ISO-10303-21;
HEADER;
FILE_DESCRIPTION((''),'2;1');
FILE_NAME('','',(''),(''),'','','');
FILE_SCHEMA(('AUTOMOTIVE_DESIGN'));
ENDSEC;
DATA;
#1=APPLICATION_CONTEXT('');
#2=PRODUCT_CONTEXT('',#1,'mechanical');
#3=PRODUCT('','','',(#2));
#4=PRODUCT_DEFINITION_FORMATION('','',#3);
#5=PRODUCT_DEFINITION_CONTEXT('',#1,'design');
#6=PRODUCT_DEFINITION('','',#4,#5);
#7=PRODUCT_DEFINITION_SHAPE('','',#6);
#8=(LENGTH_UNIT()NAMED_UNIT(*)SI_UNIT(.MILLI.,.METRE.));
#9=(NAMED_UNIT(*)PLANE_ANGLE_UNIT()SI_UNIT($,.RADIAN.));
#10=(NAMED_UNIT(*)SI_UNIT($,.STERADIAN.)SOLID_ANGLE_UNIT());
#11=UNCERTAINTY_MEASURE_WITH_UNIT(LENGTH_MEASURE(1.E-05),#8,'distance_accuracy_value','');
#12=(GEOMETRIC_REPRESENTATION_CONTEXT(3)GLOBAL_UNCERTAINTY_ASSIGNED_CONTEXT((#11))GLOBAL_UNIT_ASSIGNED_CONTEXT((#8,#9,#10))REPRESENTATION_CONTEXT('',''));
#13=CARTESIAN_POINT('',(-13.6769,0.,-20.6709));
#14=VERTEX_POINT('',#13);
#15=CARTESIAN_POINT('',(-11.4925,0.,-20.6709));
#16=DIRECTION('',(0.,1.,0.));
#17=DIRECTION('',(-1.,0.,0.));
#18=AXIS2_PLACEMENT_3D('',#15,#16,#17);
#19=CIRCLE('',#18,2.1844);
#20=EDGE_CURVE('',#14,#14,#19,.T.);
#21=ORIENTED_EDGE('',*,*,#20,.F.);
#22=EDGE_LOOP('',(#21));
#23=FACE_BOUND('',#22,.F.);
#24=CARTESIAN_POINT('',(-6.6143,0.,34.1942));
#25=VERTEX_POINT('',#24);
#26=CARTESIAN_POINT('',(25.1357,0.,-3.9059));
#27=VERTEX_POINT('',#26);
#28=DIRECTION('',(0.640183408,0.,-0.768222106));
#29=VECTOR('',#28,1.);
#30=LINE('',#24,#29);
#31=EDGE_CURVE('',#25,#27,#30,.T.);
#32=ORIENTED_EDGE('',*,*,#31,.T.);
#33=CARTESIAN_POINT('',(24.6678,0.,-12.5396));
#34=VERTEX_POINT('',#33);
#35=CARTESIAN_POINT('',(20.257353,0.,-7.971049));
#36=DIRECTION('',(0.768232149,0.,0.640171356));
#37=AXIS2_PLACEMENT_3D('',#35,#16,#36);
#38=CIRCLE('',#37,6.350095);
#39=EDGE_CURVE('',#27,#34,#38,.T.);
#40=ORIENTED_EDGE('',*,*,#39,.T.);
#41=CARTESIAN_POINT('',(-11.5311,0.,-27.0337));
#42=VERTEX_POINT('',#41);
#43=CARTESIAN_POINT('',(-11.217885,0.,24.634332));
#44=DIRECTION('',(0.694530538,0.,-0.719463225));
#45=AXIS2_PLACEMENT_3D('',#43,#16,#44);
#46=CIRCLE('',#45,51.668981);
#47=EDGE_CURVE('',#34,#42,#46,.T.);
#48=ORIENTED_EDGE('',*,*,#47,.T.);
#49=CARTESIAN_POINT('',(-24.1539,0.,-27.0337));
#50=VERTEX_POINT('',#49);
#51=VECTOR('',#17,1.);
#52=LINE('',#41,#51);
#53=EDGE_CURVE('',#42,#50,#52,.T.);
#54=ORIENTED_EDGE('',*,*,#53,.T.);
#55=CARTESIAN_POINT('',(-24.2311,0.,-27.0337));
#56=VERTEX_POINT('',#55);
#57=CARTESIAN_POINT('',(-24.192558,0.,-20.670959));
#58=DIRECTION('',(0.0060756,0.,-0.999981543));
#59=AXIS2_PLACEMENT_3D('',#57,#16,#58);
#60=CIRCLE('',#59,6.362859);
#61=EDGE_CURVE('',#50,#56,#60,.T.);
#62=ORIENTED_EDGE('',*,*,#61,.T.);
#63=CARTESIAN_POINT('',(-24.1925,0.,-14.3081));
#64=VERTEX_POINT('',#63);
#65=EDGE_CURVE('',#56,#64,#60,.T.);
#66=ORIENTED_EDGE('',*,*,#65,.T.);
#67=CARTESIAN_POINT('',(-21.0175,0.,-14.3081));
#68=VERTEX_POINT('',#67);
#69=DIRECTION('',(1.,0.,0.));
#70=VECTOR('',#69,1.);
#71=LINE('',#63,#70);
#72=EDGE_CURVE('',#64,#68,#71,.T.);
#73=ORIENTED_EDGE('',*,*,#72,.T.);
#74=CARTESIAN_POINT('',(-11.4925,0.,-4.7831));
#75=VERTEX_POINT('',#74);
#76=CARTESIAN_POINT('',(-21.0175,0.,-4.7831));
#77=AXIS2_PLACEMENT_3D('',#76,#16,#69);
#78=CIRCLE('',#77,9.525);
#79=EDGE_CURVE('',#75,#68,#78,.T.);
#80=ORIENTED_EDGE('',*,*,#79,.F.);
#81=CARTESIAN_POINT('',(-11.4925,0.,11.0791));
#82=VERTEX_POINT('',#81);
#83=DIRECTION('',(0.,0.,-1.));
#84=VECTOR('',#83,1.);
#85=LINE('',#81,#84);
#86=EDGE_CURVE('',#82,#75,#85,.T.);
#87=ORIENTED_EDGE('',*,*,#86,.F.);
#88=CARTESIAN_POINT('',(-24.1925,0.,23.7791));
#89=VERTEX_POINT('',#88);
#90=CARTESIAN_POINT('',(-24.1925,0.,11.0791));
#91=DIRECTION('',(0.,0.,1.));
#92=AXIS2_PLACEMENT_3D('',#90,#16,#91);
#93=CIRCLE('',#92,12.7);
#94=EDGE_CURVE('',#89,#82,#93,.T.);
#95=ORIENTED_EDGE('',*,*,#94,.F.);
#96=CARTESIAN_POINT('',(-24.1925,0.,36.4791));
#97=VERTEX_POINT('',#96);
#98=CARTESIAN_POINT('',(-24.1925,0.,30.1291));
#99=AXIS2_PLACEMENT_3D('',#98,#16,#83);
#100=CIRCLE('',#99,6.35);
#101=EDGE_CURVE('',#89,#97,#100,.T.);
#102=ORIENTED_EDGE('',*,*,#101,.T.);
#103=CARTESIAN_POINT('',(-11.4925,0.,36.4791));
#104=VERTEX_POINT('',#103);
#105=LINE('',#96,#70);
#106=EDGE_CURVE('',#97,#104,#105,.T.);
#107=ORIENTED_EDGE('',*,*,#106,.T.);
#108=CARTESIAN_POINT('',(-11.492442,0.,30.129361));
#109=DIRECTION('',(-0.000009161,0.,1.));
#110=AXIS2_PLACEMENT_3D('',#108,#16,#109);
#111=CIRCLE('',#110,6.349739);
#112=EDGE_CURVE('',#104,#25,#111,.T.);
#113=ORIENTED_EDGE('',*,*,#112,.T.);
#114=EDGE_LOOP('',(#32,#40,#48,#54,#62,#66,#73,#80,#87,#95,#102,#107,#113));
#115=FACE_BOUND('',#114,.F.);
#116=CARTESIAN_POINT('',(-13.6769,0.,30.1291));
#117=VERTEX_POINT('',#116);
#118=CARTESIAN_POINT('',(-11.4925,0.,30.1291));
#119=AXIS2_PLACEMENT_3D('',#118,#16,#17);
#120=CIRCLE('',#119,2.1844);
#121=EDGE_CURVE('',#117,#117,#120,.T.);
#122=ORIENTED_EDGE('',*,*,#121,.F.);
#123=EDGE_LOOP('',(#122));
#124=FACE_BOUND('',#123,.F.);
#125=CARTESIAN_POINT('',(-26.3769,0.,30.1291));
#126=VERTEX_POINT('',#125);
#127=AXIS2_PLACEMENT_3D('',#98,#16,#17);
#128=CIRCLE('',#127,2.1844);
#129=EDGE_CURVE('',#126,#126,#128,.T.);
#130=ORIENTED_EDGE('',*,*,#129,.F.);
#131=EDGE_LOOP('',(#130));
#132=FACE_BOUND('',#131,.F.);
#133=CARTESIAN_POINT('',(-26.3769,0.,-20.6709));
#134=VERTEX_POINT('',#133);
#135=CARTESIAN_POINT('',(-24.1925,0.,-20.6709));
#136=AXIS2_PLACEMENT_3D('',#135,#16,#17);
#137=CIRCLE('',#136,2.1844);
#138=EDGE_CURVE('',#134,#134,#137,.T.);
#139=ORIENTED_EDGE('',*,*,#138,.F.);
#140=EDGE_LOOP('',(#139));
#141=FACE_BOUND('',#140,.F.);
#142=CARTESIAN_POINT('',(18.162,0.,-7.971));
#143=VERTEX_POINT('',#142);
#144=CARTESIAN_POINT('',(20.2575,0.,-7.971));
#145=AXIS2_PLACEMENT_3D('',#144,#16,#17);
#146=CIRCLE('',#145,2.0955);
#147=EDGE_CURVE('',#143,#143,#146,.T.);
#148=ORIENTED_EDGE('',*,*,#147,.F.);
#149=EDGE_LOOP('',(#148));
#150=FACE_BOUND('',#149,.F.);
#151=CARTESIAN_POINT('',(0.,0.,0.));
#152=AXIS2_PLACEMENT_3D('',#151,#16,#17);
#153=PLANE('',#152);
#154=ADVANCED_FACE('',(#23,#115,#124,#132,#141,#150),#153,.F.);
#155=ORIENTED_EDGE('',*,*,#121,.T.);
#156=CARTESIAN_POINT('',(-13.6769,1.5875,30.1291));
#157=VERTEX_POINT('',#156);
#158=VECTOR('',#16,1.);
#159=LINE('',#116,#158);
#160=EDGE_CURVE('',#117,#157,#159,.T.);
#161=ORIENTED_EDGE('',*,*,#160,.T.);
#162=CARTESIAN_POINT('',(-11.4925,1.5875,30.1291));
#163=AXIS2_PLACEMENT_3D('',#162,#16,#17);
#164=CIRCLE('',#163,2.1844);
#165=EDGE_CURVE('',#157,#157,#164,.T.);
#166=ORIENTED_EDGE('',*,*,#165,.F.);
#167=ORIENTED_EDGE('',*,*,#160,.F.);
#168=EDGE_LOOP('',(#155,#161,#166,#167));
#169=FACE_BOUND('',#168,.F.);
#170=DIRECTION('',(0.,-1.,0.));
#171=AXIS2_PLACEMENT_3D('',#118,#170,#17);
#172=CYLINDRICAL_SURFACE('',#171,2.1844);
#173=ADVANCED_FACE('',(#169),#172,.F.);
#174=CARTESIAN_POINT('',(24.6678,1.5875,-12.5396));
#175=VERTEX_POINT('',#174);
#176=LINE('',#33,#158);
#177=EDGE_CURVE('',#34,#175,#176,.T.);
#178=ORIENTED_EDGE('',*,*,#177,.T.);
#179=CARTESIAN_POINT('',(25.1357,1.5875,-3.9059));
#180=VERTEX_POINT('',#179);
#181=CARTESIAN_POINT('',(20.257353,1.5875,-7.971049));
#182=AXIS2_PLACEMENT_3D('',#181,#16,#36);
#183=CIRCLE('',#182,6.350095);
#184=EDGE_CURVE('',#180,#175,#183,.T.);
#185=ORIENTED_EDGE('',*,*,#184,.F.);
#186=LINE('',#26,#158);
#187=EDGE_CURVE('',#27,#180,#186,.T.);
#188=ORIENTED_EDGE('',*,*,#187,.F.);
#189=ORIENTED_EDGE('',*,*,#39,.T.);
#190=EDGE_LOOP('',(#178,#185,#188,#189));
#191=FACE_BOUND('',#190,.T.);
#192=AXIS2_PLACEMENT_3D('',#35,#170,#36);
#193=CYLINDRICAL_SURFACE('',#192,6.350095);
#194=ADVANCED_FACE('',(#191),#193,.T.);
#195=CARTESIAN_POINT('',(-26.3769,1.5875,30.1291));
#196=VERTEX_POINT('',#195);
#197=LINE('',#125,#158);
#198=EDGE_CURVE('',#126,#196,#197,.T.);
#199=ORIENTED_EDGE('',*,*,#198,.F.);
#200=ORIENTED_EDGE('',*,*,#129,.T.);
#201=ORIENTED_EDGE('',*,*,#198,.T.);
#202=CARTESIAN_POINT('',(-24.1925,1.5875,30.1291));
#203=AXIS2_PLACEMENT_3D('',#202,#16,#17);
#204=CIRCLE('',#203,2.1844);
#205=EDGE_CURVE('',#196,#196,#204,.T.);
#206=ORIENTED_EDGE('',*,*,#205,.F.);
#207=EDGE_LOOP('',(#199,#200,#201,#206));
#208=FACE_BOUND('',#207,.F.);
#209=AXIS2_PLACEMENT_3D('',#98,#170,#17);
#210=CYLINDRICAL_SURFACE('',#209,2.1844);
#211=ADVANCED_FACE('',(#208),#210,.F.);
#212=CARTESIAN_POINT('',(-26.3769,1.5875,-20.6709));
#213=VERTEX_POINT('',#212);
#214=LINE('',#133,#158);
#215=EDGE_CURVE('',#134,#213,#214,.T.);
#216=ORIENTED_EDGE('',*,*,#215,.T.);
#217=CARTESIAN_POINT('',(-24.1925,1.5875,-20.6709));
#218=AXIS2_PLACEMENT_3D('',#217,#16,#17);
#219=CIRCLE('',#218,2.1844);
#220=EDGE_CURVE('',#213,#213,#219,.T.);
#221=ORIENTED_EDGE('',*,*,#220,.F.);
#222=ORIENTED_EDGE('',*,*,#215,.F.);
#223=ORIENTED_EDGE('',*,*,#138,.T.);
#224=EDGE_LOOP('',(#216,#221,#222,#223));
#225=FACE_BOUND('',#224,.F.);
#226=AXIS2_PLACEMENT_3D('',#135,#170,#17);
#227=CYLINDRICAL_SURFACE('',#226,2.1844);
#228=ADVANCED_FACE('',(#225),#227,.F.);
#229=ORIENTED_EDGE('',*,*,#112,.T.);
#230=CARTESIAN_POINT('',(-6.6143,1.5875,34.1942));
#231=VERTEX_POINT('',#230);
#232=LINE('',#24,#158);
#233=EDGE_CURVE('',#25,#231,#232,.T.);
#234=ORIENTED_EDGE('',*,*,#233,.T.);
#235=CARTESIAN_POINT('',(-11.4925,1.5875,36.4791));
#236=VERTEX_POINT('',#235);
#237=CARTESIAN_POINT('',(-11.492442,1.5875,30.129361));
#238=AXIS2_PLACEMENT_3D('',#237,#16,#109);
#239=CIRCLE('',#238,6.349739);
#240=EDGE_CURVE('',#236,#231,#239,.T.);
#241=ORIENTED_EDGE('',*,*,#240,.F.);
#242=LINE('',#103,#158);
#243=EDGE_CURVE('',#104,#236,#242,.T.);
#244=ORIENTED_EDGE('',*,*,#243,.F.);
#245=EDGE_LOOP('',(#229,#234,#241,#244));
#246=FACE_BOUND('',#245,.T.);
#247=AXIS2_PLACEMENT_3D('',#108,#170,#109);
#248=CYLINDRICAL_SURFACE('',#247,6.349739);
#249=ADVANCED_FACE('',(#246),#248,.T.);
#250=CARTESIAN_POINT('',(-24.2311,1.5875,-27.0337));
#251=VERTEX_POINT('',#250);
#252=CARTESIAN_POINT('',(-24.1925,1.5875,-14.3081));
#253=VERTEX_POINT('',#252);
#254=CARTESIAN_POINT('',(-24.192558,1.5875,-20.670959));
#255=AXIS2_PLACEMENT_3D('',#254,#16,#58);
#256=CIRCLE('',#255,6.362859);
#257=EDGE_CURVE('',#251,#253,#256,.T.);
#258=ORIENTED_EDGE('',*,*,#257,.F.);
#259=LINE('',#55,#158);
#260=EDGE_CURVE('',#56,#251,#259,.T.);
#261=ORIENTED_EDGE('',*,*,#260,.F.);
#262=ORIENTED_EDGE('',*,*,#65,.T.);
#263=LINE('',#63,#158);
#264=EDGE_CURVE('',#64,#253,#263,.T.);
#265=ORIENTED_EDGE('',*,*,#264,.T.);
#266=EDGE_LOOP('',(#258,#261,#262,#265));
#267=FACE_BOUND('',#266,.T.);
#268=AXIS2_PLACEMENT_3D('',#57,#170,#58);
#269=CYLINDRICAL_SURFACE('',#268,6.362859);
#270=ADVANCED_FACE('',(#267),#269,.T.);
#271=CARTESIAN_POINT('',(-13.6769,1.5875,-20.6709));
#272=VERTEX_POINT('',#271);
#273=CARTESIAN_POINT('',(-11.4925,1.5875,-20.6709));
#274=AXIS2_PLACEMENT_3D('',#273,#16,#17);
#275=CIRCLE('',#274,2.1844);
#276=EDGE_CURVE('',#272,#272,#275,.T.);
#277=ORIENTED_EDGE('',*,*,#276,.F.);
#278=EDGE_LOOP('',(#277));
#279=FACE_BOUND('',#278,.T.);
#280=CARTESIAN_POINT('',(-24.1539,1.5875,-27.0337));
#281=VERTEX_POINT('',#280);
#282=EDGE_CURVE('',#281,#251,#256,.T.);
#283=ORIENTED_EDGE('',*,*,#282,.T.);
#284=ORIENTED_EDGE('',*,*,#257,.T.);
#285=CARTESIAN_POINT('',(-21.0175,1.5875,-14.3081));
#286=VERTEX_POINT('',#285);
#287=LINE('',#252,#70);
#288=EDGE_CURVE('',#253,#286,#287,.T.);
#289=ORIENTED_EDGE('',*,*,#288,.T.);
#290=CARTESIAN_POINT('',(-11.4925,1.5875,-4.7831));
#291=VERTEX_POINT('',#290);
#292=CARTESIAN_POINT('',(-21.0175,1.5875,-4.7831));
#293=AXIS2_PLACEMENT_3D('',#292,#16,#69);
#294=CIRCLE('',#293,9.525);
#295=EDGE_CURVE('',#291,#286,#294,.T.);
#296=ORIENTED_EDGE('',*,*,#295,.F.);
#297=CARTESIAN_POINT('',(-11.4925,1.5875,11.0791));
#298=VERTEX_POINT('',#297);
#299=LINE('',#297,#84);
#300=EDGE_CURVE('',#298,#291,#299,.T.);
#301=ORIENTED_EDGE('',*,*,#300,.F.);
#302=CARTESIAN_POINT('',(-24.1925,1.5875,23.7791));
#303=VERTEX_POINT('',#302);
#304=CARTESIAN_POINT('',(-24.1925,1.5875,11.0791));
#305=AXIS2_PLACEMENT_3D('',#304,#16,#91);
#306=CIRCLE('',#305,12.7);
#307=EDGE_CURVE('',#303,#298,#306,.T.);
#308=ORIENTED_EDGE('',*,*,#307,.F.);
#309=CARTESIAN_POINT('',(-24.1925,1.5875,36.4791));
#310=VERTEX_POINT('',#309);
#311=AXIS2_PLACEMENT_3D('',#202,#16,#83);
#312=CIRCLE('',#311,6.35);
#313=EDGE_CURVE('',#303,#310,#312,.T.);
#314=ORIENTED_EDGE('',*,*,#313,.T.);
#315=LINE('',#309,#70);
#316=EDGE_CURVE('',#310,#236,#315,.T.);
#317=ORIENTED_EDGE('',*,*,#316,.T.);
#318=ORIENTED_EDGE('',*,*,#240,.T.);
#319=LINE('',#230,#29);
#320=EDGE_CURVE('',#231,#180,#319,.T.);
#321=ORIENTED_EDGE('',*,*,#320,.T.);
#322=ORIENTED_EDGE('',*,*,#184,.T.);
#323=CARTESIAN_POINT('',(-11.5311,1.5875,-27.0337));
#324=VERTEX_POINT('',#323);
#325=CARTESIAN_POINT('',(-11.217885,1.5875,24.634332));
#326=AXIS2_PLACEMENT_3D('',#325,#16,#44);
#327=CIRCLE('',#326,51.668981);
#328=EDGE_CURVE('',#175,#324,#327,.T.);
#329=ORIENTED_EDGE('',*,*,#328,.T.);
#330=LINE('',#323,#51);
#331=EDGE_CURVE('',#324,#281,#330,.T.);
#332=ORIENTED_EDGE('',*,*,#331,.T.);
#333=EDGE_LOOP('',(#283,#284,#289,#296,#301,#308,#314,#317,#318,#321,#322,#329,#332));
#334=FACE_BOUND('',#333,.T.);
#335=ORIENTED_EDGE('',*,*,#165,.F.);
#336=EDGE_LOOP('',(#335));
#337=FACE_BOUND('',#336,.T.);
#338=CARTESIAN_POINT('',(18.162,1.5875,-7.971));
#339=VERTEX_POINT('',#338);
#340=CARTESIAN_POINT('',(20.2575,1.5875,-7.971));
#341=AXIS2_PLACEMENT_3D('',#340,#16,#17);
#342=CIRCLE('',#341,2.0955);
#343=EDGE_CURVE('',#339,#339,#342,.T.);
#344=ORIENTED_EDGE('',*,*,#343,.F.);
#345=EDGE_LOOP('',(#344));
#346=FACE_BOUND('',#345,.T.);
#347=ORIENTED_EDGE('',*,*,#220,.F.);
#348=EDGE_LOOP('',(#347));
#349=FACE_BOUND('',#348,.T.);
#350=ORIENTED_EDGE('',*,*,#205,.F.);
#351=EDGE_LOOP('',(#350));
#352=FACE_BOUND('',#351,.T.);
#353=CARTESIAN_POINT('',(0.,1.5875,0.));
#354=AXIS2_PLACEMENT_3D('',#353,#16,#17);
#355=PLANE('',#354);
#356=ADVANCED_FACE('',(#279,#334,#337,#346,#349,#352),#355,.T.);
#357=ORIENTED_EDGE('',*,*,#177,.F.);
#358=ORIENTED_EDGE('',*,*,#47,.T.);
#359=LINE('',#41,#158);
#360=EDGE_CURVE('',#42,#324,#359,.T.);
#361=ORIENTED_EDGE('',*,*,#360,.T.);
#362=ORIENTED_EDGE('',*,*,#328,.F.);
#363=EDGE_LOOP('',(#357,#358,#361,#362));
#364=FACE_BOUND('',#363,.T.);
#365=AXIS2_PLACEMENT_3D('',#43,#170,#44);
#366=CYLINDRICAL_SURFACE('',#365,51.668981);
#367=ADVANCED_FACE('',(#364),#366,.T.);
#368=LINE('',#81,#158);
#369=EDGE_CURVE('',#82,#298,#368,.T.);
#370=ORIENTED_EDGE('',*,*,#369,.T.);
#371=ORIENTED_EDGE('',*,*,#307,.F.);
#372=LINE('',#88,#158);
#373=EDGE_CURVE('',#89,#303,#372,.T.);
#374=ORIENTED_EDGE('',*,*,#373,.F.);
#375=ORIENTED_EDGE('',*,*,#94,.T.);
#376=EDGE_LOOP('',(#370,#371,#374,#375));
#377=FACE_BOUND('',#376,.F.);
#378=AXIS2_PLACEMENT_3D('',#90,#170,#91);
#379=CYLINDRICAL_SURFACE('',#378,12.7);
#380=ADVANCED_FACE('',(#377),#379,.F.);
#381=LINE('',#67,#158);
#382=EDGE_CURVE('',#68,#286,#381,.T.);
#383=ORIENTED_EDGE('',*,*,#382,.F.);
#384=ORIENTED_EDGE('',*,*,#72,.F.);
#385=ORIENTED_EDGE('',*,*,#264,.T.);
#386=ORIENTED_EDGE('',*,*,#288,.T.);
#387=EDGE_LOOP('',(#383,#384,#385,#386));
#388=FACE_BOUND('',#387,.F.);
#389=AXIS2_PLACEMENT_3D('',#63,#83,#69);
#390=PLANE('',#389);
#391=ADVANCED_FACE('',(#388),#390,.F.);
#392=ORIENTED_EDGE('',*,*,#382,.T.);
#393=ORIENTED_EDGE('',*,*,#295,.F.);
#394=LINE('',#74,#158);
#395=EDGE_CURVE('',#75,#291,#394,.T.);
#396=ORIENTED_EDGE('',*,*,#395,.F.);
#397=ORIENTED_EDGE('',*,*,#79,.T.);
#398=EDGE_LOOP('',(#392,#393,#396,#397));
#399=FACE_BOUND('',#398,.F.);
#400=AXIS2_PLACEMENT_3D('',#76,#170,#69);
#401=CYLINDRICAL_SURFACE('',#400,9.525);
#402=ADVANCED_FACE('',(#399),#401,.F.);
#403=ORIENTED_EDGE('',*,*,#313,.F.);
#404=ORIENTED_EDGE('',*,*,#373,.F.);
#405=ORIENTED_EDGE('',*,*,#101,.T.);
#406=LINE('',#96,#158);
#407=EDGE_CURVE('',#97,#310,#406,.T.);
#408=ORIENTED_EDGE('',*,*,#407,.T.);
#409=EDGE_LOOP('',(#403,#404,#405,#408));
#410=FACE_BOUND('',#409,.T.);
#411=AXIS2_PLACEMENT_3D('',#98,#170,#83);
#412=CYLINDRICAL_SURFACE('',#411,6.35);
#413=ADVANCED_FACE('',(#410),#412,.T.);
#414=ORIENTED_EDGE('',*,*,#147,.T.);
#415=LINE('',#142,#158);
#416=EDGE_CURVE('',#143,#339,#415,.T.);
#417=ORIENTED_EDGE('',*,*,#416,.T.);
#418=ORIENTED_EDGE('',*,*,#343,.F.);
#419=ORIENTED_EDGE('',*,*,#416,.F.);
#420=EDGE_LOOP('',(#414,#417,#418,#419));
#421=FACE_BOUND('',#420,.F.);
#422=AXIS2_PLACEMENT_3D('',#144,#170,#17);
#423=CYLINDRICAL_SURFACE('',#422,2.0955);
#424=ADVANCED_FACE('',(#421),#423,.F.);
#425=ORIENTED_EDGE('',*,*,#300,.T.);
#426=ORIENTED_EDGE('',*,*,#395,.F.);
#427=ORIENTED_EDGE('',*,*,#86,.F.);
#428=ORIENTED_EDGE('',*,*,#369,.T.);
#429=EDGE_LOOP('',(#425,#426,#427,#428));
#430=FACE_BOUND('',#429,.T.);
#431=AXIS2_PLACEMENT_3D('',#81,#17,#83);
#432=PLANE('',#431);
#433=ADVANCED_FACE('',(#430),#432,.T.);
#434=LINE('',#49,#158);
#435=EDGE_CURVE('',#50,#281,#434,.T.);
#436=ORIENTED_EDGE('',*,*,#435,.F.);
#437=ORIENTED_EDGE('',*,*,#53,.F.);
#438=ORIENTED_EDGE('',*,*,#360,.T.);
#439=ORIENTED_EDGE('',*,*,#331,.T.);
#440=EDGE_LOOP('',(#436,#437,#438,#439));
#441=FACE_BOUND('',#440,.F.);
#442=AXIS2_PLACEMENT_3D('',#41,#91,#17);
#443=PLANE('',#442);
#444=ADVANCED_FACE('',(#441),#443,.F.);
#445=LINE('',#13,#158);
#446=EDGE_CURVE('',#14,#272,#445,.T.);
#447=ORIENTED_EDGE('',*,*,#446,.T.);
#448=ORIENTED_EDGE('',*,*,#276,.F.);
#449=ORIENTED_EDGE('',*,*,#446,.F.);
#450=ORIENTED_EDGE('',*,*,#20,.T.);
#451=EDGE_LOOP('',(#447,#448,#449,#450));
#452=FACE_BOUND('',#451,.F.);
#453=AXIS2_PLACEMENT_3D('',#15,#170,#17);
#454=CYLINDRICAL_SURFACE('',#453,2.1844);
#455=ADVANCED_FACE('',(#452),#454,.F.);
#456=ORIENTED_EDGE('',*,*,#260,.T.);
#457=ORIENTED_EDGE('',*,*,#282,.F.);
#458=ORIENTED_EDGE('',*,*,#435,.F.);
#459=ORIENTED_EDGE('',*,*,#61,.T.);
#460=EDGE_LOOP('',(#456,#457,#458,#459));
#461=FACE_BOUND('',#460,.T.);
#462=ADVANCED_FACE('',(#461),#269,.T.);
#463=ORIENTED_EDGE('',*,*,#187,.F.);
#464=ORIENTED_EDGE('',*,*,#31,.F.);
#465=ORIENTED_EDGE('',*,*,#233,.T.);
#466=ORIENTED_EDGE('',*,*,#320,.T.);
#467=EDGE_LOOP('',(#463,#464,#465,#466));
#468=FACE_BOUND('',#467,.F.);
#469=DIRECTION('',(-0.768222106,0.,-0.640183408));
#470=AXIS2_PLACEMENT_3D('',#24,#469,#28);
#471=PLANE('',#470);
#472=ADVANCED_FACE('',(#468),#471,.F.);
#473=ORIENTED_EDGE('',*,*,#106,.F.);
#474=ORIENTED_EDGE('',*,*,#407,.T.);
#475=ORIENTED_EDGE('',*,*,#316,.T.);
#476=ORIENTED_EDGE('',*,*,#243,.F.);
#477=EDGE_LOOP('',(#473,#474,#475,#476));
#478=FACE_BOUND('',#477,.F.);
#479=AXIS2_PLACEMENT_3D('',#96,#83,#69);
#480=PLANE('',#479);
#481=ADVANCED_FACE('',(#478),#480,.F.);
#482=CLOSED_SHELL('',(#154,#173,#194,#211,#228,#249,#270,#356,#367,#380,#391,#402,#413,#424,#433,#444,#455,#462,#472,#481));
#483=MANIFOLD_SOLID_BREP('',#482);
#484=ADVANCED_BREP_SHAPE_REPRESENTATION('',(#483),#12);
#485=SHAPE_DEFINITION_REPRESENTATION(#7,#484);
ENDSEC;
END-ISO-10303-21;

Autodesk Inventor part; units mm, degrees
ref_plane "YZ Plane" through (0, 0, 0) normal (1, 0, 0) x (0, 1, 0)
ref_plane "XZ Plane" through (0, 0, 0) normal (0, 1, 0) x (-1, 0, 0)
ref_plane "XY Plane" through (0, 0, 0) normal (0, 0, 1) x (1, 0, 0)
sketch "main" plane through (0, 0, 0) normal (0, 0, 1) x (1, 0, 0)
  arc A0 (24.1925, 23.7791) -> (11.4925, 11.0791) centre (24.1925, 11.0791) ccw
  circle A1 centre (11.4925, 30.1291) radius 2.1844
  line L0 (24.1925, 23.7791) -> (24.1925, 23.7791)
  arc A2 (11.4925, 36.4791) -> (6.6143, 34.1942) centre (11.4925, 30.1291) ccw
  circle A3 centre (24.1925, 30.1291) radius 2.1844
  line L1 (24.1925, 36.4791) -> (11.4925, 36.4791)
  arc A4 (24.1925, 23.7791) -> (24.1925, 36.4791) centre (24.1925, 30.1291) ccw
  circle A5 centre (11.4925, -20.6709) radius 2.1844
  circle A6 centre (24.1925, -20.6709) radius 2.1844
  line L2 (24.1925, -14.3081) -> (21.0175, -14.3081)
  arc A7 (24.1539, -27.0337) -> (24.1925, -14.3081) centre (24.1925, -20.6709) ccw
  line L3 (11.4925, 11.0791) -> (11.4925, -4.7831)
  line L4 (6.6143, 34.1942) -> (-25.1357, -3.9059)
  arc A8 (11.4925, -4.7831) -> (21.0175, -14.3081) centre (21.0175, -4.7831) ccw
  circle A9 centre (-20.2575, -7.971) radius 2.0955
  arc A10 (-24.6678, -12.5396) -> (11.5311, -27.0337) centre (11.2178, 24.6342) ccw
  arc A11 (-25.1357, -3.9059) -> (-24.6678, -12.5396) centre (-20.2575, -7.971) ccw
  line L5 (11.5311, -27.0337) -> (24.2311, -27.0337)
  point P0 (10.6662, 5.6616)
  point P1 (11.4925, 23.7791)
  point P2 (11.4925, -14.3081)
  dimension "d0" = 12.7
  dimension "d1" = 12.7
  dimension "d2" = 9.525
sketch "Sketch1" plane through (0, 0, 0) normal (0, 1, 0) x (-1, 0, 0)
  arc A0 (24.1925, 23.7791) -> (11.4925, 11.0791) centre (24.1925, 11.0791) ccw
  circle A1 centre (11.4925, 30.1291) radius 2.1844
  line L0 (24.1925, 23.7791) -> (24.1925, 23.7791)
  arc A2 (11.4925, 36.4791) -> (6.6143, 34.1942) centre (11.4925, 30.1291) ccw
  circle A3 centre (24.1925, 30.1291) radius 2.1844
  line L1 (24.1925, 36.4791) -> (11.4925, 36.4791)
  arc A4 (24.1925, 23.7791) -> (24.1925, 36.4791) centre (24.1925, 30.1291) ccw
  circle A5 centre (11.4925, -20.6709) radius 2.1844
  circle A6 centre (24.1925, -20.6709) radius 2.1844
  line L2 (24.1925, -14.3081) -> (21.0175, -14.3081)
  arc A7 (24.1539, -27.0337) -> (24.1925, -14.3081) centre (24.1925, -20.6709) ccw
  line L3 (11.4925, 11.0791) -> (11.4925, -4.7831)
  line L4 (6.6143, 34.1942) -> (-25.1357, -3.9059)
  arc A8 (11.4925, -4.7831) -> (21.0175, -14.3081) centre (21.0175, -4.7831) ccw
  circle A9 centre (-20.2575, -7.971) radius 2.0955
  arc A10 (-24.6678, -12.5396) -> (11.5311, -27.0337) centre (11.2178, 24.6342) ccw
  arc A11 (-25.1357, -3.9059) -> (-24.6678, -12.5396) centre (-20.2575, -7.971) ccw
  line L5 (11.5311, -27.0337) -> (24.2311, -27.0337)
  point P0 (0, 0)
extrude "Extrusion1" add sketch "Sketch1" along normal blind 1.5875
equation "\"BendRadius\" = Thickness"
equation "\"BendReliefWidth\" = Thickness"
equation "\"BendReliefDepth\" = 0.5 * Thickness"
equation "\"CornerReliefSize\" = 4 * Thickness"
equation "\"MinimumRemnant\" = 2 * Thickness"
equation "\"TransitionRadius\" = BendRadius"
equation "\"JacobiRadiusSize\" = BendRadius"
equation "\"GapSize\" = Thickness"
equation "\"Thickness\" = 1.5875"
properties part number "gusset" material "Acetal Resin, White"
